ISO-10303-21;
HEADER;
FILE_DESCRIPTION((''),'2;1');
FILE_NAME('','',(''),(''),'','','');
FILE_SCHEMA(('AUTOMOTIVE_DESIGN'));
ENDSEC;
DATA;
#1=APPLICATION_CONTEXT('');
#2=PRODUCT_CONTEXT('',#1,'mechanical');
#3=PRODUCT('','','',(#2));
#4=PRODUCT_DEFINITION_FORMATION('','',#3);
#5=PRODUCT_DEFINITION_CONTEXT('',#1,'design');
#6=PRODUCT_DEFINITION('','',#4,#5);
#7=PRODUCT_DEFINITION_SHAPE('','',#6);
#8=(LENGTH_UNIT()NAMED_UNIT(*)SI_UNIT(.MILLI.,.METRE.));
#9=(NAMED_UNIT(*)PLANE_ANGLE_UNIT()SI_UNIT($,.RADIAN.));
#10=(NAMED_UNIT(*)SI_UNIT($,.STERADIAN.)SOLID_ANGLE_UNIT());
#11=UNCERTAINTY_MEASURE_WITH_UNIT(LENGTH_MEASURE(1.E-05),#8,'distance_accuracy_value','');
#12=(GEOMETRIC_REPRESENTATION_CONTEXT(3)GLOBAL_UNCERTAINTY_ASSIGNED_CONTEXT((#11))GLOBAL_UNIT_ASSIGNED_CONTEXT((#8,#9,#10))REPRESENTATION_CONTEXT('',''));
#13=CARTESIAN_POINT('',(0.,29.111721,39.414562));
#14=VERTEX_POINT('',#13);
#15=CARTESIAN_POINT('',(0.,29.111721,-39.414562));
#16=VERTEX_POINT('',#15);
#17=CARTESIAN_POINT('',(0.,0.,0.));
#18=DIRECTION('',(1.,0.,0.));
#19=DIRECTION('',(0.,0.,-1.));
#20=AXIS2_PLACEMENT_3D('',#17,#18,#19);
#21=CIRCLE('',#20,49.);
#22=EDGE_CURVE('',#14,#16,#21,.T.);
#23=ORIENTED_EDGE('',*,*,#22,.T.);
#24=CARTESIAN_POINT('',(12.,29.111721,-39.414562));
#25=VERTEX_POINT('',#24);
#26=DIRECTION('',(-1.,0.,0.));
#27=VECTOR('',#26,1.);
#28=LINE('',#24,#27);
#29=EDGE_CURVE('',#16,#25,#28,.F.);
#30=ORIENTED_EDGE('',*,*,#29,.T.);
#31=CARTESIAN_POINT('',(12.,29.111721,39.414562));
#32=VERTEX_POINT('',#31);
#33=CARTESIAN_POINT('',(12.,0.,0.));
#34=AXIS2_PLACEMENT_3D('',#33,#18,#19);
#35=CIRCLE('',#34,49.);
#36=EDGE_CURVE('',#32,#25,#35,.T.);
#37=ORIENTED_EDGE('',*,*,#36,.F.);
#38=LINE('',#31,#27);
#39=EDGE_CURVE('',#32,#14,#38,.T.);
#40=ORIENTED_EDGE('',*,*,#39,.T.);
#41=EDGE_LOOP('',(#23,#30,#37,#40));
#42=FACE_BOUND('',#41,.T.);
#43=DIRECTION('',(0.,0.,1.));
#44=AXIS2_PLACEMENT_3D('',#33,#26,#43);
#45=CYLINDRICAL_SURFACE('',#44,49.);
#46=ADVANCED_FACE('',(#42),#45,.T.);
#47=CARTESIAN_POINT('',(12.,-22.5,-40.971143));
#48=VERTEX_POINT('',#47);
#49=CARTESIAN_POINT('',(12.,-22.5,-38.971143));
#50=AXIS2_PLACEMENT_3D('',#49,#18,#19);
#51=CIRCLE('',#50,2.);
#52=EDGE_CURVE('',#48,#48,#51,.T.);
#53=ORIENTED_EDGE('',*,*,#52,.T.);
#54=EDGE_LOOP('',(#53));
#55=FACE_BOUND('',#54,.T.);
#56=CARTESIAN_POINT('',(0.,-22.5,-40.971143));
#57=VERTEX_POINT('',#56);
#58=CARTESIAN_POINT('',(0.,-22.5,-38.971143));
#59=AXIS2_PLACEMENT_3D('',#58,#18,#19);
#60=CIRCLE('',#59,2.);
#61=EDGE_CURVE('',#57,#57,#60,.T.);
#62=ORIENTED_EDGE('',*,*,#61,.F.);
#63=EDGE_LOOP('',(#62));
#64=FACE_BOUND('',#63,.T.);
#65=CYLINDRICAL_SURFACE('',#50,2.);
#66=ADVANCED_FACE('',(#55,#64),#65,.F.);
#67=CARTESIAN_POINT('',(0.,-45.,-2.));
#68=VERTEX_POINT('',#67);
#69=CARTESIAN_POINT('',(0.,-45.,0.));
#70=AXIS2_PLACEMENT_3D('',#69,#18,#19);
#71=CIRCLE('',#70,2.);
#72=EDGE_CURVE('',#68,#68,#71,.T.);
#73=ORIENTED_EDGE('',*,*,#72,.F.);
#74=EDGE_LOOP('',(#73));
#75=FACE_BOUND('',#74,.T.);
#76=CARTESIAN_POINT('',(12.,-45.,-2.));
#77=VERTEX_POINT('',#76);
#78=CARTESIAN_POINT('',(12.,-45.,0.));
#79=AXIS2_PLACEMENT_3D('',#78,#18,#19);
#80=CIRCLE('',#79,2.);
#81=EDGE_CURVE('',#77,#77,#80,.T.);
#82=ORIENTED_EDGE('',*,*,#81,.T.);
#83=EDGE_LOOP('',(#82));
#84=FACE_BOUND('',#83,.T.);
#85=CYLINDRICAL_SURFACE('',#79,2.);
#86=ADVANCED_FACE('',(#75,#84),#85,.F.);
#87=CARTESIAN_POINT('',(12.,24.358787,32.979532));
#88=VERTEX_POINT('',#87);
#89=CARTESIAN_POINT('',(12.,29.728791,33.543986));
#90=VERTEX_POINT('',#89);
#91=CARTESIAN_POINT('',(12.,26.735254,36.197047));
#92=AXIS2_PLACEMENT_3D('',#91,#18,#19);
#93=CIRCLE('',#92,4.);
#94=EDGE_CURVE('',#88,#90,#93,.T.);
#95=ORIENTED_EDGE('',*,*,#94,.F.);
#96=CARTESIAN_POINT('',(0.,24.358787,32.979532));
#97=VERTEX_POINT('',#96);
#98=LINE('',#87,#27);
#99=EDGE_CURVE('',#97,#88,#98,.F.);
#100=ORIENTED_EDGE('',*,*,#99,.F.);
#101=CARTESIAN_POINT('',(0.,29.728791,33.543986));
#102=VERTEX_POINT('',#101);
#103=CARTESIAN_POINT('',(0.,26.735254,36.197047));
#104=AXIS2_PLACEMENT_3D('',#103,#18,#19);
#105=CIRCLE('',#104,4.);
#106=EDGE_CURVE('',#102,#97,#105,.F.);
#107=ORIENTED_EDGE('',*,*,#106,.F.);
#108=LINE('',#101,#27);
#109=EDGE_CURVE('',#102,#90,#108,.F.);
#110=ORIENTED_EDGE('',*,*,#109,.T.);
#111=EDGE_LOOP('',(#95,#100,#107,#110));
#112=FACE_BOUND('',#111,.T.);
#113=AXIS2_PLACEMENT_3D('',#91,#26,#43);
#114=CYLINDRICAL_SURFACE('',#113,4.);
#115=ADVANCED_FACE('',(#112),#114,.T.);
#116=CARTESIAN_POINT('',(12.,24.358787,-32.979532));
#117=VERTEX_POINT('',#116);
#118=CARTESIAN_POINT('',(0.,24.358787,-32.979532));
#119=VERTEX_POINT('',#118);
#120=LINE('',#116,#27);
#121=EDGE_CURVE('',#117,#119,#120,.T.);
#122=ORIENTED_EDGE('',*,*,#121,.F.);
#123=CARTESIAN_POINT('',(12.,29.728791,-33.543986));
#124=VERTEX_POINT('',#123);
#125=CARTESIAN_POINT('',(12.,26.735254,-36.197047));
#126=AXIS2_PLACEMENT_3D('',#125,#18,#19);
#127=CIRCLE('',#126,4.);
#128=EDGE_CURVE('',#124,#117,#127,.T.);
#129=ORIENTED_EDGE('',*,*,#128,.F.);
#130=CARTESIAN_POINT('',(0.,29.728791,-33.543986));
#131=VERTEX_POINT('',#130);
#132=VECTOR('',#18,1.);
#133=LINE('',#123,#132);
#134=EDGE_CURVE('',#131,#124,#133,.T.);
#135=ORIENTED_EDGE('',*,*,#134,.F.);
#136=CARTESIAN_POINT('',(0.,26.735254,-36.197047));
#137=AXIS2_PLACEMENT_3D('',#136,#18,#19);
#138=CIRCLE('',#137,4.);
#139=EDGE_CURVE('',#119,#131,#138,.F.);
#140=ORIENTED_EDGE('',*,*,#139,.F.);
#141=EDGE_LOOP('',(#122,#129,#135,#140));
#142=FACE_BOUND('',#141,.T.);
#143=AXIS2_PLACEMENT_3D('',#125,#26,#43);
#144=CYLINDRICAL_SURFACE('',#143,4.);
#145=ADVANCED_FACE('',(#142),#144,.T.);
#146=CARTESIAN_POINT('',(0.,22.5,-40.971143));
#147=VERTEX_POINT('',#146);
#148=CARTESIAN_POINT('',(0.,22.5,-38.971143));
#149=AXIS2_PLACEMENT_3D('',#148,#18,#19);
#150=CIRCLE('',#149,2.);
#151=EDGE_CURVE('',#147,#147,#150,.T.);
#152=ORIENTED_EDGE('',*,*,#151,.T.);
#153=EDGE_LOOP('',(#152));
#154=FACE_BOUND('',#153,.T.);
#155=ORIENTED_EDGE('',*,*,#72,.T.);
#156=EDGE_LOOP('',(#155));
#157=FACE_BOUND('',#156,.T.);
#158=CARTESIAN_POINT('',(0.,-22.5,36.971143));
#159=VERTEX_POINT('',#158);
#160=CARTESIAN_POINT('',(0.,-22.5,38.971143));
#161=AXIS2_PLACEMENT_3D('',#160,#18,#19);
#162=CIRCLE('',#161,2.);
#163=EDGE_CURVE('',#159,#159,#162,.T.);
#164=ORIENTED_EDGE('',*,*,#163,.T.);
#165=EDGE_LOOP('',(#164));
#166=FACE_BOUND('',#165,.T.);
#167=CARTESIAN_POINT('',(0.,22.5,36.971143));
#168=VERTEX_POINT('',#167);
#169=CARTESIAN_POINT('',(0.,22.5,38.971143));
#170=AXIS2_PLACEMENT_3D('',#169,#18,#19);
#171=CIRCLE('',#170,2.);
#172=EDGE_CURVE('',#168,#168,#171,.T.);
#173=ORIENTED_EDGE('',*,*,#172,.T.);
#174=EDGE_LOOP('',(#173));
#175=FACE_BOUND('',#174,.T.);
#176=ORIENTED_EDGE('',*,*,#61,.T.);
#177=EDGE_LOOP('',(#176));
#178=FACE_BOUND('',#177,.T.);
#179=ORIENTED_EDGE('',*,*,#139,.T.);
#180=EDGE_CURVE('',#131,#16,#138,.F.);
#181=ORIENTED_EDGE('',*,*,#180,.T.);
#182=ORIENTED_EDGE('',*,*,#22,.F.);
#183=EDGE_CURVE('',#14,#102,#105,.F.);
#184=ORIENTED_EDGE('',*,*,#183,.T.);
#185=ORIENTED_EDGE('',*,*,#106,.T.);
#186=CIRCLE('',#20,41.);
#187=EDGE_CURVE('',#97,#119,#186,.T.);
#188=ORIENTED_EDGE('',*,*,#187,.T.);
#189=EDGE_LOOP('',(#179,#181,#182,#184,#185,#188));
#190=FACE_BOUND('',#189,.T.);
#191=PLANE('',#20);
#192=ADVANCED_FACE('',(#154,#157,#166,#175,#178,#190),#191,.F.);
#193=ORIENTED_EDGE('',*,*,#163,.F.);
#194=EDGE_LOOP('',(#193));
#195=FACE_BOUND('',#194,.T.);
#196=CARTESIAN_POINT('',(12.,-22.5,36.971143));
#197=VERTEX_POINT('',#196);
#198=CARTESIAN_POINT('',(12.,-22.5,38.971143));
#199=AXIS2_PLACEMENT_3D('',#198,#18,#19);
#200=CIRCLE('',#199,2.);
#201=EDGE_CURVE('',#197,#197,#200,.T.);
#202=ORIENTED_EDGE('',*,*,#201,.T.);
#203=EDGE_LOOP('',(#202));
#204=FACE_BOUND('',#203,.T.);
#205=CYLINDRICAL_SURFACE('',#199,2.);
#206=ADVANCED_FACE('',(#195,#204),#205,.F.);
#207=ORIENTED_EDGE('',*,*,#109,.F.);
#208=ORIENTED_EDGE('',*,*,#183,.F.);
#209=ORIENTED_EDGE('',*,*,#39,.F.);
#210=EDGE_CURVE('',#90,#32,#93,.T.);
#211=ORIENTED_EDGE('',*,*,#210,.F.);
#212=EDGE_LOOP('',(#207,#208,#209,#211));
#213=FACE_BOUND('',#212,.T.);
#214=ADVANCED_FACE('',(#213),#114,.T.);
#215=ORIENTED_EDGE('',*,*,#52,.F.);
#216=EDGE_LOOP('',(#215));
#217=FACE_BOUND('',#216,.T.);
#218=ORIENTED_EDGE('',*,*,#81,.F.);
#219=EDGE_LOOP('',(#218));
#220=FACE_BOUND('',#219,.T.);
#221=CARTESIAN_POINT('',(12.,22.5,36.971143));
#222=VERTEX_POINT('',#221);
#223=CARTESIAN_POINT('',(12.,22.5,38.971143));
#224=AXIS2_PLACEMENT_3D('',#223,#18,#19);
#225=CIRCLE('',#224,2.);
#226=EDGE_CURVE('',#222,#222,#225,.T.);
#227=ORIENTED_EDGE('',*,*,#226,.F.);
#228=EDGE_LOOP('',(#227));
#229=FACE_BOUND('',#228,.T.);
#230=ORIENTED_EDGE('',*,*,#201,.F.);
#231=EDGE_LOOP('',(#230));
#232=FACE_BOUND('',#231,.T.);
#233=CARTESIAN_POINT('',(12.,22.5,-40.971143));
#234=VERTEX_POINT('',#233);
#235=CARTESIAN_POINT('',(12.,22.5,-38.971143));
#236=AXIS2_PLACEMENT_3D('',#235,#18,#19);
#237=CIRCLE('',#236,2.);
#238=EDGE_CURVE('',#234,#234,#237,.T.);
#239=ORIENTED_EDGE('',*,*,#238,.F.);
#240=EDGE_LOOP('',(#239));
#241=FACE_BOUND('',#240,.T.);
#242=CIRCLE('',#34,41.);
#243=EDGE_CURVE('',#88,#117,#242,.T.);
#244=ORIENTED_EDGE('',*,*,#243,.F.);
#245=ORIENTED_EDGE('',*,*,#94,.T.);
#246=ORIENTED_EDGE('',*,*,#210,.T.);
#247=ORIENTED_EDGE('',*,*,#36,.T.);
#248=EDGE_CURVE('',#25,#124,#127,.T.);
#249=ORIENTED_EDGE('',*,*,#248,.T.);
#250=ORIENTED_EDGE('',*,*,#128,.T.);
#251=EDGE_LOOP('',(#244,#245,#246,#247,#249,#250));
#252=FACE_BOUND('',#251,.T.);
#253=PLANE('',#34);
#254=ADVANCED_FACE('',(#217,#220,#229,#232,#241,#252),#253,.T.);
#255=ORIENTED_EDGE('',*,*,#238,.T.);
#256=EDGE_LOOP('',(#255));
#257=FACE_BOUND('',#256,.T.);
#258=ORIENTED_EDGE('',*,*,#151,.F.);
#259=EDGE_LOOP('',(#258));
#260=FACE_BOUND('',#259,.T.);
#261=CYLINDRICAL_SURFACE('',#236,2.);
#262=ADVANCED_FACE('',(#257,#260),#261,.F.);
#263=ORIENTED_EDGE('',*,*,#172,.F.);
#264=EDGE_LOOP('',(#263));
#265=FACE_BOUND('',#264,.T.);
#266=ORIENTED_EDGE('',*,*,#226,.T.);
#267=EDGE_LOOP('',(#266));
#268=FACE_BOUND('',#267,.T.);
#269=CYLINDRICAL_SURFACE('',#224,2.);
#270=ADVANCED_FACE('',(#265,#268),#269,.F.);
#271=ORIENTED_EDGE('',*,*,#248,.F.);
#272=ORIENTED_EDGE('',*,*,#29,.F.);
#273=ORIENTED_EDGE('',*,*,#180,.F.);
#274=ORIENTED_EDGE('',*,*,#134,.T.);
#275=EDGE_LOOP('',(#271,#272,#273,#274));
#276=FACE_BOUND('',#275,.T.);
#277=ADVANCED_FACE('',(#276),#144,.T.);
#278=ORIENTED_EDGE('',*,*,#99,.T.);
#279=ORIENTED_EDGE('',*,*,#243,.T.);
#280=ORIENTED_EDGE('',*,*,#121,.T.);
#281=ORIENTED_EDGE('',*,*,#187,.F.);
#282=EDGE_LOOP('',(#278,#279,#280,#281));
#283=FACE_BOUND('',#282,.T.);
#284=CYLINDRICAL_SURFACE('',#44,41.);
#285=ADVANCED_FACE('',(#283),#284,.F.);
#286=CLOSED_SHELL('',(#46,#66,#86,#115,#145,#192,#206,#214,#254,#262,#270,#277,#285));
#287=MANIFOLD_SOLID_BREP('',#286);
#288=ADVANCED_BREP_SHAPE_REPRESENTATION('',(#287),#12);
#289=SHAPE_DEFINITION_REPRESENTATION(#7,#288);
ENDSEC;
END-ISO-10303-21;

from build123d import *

# Parameters (mm, degrees)
SKETCH1_R           = 49
SKETCH1_R_2         = 41
BOSS_EXTRUDE1_DEPTH = 12
CIRPATTERN1_COUNT   = 6
CUT_EXTRUDE1_START  = -12
CUT_EXTRUDE1_DEPTH  = 12
FILLET1_R           = 4


with BuildPart() as part:
    # Sketch1 → Boss-Extrude1 (new body)
    with BuildSketch(Plane(origin=(0, 0, 0), x_dir=(0, 0, -1), z_dir=(1, 0, 0))):
        Circle(SKETCH1_R)
        Circle(SKETCH1_R_2, mode=Mode.SUBTRACT)
    extrude(amount=BOSS_EXTRUDE1_DEPTH)

    # Sketch3 → Ø4.0mm Dowel Hole1 (revolve, cut)
    with BuildSketch(Plane(origin=(12, 45, 0), x_dir=(0, 0, -1), z_dir=(0, 1, 0))):
        Polygon((0, 0), (0, 51.201721238), (2, 50), (2, 0), align=None)
    f_4_0mm_dowel_hole1 = revolve(axis=Axis((18.35, 45, 0), (-1, 0, 0)), mode=Mode.SUBTRACT)

    # CirPattern1: Ø4.0mm Dowel Hole1 ×6 about axis
    cirpattern1_axis = Axis((0, 0, 0), (1, 0, 0))
    for i in range(1, CIRPATTERN1_COUNT):
        add(f_4_0mm_dowel_hole1.rotate(cirpattern1_axis, i * 360 / CIRPATTERN1_COUNT), mode=Mode.SUBTRACT)

    # Sketch4 → Cut-Extrude1 (cut)
    with BuildSketch(Plane(origin=(12, 0, 0), x_dir=(0, 0, -1), z_dir=(1, 0, 0)).offset(CUT_EXTRUDE1_START)):
        with BuildLine():
            Line((-36.670833097, 32.5), (0, 0))
            Line((0, 0), (36.670833097, 32.5))
            ThreePointArc((36.670833097, 32.5), (0, 49), (-36.670833097, 32.5))
        make_face()
    extrude(amount=CUT_EXTRUDE1_DEPTH, mode=Mode.SUBTRACT)

    # Fillet1
    fillet1_edges = [part.edges().sort_by_distance(p)[0] for p in [
        (6, 32.5, -36.670833097),
        (6, 27.193877551, -30.683758305),
        (6, 27.193877551, 30.683758305),
        (6, 32.5, 36.670833097),
    ]]
    fillet(fillet1_edges, radius=FILLET1_R - 0.0001)  # a hair under: the kernel refuses the full size


solid = part.part
